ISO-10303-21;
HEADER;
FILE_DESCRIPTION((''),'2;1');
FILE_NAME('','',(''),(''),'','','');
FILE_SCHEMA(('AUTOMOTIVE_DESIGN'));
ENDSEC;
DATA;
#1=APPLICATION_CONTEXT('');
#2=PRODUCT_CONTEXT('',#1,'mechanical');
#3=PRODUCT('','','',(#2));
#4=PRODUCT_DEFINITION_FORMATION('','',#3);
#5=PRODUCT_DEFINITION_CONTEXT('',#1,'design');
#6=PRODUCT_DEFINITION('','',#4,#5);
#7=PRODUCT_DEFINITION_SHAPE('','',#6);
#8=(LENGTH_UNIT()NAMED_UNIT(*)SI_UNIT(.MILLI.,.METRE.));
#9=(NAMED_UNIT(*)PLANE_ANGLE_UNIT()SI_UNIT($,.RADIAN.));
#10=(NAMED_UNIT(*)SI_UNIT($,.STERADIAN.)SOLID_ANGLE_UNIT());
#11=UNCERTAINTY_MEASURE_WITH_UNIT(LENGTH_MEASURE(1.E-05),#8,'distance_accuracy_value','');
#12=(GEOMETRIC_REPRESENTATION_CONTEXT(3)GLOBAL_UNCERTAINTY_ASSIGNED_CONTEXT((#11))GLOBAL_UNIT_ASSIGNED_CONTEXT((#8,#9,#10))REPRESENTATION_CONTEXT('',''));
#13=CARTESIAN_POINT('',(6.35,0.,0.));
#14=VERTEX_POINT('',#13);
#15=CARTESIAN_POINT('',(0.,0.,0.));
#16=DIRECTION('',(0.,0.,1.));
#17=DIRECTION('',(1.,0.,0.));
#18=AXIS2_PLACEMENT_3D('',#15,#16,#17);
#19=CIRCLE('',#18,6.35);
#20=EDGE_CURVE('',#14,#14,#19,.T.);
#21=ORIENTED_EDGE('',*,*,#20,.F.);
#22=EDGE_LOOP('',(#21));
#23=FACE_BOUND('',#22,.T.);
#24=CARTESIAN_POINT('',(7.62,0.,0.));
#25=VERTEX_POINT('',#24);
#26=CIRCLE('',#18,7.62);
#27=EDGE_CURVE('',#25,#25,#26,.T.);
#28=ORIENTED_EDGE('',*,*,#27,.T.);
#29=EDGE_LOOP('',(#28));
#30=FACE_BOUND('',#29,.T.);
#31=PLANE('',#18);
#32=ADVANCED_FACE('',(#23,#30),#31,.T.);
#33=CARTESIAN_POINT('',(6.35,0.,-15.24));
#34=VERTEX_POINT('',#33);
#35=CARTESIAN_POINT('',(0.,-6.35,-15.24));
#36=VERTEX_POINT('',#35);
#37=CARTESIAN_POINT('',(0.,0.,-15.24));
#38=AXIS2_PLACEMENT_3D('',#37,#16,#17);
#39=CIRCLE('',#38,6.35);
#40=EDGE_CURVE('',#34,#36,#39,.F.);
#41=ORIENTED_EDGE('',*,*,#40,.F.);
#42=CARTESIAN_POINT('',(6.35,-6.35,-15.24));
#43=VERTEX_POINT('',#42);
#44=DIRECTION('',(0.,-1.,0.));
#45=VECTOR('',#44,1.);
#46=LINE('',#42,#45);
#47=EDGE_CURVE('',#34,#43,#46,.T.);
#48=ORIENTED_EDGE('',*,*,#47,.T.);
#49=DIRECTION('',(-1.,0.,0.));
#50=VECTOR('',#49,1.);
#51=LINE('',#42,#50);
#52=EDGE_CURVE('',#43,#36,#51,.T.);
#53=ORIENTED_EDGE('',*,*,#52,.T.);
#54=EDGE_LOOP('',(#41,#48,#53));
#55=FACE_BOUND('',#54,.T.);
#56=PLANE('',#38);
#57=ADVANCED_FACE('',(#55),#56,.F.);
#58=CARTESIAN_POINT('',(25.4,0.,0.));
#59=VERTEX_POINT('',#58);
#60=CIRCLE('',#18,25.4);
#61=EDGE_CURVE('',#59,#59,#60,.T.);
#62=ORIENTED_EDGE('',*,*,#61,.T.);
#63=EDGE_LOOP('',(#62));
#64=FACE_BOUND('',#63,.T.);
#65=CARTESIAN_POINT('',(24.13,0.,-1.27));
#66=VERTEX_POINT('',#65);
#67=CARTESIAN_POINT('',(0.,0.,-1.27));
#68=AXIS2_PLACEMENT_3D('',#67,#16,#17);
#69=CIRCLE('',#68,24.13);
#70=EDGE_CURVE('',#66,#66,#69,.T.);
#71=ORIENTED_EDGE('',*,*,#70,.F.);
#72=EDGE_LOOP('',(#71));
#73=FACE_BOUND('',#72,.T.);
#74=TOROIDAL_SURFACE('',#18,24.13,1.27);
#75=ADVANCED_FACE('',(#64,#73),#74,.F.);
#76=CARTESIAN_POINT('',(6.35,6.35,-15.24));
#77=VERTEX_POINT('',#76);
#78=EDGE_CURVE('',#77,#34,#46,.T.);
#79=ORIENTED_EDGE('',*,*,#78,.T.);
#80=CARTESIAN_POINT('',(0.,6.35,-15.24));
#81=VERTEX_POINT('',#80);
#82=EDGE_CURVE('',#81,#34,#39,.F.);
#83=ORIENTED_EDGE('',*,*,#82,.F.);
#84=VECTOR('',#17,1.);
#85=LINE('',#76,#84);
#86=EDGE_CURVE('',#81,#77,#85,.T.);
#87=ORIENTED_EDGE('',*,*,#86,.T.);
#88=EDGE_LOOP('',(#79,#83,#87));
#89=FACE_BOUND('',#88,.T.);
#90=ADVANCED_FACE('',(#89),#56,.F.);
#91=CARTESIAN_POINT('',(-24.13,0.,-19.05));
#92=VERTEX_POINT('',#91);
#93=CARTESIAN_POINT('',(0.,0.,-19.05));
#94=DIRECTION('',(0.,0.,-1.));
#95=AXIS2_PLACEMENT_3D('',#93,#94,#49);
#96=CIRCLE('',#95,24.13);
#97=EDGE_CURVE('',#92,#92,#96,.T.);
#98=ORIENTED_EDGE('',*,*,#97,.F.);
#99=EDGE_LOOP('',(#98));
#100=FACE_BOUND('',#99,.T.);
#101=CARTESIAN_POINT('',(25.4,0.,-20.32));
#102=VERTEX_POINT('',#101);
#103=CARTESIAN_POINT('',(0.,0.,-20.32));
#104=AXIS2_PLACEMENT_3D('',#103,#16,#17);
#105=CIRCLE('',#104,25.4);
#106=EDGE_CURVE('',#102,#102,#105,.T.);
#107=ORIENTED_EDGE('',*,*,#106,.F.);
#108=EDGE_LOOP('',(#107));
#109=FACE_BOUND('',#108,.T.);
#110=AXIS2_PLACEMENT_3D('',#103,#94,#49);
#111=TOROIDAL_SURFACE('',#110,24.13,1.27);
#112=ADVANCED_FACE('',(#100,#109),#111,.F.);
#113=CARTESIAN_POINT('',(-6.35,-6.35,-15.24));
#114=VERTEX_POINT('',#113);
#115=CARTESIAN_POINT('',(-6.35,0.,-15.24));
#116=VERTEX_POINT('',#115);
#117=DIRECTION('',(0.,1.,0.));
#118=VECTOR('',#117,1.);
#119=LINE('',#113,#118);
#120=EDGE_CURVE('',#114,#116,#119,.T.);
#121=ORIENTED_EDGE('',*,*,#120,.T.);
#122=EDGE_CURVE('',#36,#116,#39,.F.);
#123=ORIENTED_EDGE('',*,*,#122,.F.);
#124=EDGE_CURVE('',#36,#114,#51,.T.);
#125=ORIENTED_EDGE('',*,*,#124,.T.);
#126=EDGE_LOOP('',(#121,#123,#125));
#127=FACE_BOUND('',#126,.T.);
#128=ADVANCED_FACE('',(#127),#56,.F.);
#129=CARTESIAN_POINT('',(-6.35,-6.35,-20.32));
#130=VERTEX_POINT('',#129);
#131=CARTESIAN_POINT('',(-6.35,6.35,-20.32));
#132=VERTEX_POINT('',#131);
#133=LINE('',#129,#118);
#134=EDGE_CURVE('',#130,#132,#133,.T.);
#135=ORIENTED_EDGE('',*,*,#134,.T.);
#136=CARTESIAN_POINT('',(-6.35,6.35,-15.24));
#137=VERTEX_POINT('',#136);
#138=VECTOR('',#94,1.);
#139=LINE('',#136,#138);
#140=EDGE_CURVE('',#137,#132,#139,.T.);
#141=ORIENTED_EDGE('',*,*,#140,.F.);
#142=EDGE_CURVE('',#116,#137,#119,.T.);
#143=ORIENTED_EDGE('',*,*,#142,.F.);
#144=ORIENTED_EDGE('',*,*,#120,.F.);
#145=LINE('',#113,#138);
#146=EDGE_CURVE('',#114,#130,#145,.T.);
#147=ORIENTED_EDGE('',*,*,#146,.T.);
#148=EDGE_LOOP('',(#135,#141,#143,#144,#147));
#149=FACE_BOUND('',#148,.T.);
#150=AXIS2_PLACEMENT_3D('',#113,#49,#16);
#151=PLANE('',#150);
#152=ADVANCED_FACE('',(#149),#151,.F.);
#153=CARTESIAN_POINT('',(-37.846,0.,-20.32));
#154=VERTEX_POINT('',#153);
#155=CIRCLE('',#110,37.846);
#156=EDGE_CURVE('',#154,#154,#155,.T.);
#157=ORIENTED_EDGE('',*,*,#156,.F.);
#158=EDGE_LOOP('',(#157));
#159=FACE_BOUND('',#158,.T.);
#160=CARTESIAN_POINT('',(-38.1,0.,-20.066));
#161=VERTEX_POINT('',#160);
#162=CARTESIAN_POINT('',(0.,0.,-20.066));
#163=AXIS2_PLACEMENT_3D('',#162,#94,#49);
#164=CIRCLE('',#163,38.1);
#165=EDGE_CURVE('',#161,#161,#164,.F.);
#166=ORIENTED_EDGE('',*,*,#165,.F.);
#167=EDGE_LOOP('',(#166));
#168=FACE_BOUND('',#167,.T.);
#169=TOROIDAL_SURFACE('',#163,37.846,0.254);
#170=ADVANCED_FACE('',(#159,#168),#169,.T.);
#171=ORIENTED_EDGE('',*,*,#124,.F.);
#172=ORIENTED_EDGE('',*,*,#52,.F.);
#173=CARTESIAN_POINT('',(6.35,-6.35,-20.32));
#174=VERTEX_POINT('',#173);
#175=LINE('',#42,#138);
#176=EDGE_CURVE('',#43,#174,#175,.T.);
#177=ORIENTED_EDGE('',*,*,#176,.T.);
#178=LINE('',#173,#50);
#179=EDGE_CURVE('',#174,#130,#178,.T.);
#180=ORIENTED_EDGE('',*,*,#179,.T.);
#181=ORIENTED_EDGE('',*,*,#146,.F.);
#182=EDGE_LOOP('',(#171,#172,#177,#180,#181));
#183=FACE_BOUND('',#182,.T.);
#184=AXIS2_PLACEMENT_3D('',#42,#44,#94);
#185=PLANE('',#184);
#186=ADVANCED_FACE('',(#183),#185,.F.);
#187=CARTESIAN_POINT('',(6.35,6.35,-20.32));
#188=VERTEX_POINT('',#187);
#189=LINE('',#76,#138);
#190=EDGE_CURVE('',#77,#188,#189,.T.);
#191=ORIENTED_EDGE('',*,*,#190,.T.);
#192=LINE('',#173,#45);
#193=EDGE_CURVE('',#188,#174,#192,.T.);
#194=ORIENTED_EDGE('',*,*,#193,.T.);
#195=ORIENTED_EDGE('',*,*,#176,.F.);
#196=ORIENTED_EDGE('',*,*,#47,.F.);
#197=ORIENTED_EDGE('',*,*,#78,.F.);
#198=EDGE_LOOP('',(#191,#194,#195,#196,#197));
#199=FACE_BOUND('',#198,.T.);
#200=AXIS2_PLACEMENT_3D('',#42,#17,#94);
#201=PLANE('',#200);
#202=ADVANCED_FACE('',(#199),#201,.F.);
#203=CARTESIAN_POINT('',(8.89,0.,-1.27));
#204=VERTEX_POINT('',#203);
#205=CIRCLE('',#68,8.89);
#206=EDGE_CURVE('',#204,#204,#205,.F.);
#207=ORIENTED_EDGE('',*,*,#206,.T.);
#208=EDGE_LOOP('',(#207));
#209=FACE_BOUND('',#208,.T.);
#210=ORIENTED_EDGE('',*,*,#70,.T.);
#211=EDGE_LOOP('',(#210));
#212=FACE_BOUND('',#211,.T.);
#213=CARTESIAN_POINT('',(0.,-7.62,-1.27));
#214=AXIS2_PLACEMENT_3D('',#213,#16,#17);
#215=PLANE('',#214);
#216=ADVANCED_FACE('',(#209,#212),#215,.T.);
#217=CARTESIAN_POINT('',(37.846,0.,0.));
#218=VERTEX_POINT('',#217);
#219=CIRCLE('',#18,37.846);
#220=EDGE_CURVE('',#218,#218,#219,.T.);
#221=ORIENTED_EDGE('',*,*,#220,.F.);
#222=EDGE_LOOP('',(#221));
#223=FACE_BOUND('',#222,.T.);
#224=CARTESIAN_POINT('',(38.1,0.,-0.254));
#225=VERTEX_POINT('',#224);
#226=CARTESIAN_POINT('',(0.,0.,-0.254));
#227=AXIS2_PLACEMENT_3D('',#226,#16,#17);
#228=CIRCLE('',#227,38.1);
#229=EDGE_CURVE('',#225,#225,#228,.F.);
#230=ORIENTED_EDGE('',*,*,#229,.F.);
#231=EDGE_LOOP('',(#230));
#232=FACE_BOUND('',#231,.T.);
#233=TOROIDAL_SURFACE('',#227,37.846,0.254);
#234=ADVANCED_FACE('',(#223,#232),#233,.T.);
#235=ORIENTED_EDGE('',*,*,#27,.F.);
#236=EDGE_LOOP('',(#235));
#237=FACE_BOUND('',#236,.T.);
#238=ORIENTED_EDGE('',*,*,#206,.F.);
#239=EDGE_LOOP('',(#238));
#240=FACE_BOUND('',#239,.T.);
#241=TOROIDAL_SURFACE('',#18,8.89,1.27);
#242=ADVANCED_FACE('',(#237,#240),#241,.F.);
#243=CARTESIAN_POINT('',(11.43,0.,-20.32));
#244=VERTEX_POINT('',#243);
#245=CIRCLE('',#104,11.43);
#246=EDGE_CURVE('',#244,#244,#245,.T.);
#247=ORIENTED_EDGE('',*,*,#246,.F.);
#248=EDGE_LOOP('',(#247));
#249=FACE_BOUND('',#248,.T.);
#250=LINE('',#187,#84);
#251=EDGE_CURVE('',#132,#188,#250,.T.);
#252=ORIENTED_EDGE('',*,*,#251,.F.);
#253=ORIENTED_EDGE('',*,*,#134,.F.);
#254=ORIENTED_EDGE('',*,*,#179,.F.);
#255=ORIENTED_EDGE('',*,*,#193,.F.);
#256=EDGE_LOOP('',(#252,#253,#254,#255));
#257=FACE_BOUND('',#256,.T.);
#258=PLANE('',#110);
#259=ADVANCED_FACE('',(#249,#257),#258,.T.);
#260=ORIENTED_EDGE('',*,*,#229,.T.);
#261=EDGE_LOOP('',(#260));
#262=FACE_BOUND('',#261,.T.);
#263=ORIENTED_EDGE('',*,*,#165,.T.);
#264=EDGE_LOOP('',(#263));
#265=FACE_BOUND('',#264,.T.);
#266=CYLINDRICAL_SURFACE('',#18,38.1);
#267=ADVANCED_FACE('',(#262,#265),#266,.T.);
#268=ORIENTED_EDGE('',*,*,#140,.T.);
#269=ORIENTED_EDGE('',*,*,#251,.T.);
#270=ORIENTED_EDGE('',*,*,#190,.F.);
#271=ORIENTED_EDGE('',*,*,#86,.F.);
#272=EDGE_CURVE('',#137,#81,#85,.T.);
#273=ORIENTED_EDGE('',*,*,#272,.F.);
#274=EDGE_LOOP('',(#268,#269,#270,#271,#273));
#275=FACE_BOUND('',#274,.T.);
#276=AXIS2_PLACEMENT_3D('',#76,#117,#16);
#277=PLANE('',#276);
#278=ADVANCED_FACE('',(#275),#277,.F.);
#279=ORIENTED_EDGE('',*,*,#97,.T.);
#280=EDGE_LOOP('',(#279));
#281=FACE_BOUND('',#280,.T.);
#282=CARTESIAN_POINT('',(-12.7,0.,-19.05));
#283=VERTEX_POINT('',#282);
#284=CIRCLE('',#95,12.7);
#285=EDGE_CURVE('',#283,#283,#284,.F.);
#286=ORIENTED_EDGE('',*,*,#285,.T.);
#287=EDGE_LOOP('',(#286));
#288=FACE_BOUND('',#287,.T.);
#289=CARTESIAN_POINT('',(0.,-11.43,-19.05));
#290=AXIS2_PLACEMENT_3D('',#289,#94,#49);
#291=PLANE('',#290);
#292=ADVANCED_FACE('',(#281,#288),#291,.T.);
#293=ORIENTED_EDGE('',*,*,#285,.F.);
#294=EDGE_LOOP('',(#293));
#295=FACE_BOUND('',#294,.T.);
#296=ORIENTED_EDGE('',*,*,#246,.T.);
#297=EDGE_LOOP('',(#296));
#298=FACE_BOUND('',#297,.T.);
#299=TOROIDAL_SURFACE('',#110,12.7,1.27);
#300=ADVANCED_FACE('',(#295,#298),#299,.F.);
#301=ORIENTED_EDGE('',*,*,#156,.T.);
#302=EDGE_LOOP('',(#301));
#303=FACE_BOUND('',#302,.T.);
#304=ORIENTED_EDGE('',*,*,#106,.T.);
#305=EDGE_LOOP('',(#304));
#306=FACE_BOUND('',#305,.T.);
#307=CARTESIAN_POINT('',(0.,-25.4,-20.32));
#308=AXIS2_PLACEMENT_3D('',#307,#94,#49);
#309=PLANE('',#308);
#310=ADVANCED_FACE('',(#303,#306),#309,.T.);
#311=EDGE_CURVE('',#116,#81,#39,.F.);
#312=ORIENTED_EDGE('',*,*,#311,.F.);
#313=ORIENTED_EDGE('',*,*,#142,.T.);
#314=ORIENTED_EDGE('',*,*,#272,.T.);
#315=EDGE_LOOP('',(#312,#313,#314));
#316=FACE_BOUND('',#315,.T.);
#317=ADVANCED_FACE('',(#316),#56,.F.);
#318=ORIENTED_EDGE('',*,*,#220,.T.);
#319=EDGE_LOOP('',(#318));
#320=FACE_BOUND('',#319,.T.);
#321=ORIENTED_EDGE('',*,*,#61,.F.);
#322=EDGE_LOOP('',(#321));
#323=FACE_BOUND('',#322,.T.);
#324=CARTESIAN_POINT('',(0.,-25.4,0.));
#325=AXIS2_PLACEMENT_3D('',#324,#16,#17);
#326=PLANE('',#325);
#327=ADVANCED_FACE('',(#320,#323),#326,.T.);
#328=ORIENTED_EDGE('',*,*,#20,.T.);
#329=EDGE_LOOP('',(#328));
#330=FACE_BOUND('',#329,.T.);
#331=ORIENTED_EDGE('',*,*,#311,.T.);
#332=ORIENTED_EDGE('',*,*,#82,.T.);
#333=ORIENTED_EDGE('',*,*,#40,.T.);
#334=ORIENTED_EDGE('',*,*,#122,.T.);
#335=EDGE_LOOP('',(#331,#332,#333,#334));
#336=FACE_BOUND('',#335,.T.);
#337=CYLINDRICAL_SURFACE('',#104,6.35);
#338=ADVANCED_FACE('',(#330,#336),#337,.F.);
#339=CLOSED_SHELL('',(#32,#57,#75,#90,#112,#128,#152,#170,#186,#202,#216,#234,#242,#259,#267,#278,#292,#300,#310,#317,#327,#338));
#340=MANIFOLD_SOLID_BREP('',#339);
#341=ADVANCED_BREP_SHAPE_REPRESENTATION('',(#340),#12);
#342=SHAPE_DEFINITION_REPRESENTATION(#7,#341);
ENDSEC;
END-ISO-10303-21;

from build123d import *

# Parameters (mm, degrees)
SKETCH3_R          = 6.35
CUT_EXTRUDE1_DEPTH = 58.585782968
FILLET1_R          = 1.27
FILLET2_R          = 0.254
SKETCH4_W          = 12.7
SKETCH4_H          = 12.7
CUT_EXTRUDE2_DEPTH = 5.08


with BuildPart() as part:
    # Sketch2 → Revolve1 (revolve)
    with BuildSketch(Plane(origin=(0, 0, 0), x_dir=(0, 0, -1), z_dir=(1, 0, 0)), mode=Mode.PRIVATE) as revolve1_sk:
        Polygon((0, -7.62), (1.27, -7.62), (1.27, -25.4), (0, -25.4), (0, -38.1), (20.32, -38.1), (20.32, -25.4), (19.05, -25.4), (19.05, -11.43), (20.32, -11.43), (20.32, 0), (0, 0), align=None)
    revolve(revolve1_sk.sketch.rotate(Axis((0, 0, 0), (0, 0, -1)), 270), axis=Axis((0, 0, 0), (0, 0, -1)))

    # Sketch3 → Cut-Extrude1 (cut, through all)
    with BuildSketch(Plane.XY):
        Circle(SKETCH3_R)
    extrude(amount=-CUT_EXTRUDE1_DEPTH, mode=Mode.SUBTRACT)

    # Fillet1
    fillet1_edges = [part.edges().sort_by_distance(p)[0] for p in [
        (-25.4, 0, -19.05),
        (-25.4, 0, -1.27),
        (-7.62, 0, -1.27),
        (-11.43, 0, -19.05),
    ]]
    fillet(fillet1_edges, radius=FILLET1_R - 0.0001)  # a hair under: the kernel refuses the full size

    # Fillet2
    fillet2_edges = [part.edges().sort_by_distance(p)[0] for p in [
        (-38.1, 0, -20.32),
        (-38.1, 0, 0),
    ]]
    fillet(fillet2_edges, radius=FILLET2_R)

    # Sketch4 → Cut-Extrude2 (cut)
    with BuildSketch(Plane(origin=(0, 0, -20.32), x_dir=(-1, 0, 0), z_dir=(0, 0, -1))):
        Rectangle(SKETCH4_W, SKETCH4_H)
    extrude(amount=-CUT_EXTRUDE2_DEPTH, mode=Mode.SUBTRACT)


solid = part.part
